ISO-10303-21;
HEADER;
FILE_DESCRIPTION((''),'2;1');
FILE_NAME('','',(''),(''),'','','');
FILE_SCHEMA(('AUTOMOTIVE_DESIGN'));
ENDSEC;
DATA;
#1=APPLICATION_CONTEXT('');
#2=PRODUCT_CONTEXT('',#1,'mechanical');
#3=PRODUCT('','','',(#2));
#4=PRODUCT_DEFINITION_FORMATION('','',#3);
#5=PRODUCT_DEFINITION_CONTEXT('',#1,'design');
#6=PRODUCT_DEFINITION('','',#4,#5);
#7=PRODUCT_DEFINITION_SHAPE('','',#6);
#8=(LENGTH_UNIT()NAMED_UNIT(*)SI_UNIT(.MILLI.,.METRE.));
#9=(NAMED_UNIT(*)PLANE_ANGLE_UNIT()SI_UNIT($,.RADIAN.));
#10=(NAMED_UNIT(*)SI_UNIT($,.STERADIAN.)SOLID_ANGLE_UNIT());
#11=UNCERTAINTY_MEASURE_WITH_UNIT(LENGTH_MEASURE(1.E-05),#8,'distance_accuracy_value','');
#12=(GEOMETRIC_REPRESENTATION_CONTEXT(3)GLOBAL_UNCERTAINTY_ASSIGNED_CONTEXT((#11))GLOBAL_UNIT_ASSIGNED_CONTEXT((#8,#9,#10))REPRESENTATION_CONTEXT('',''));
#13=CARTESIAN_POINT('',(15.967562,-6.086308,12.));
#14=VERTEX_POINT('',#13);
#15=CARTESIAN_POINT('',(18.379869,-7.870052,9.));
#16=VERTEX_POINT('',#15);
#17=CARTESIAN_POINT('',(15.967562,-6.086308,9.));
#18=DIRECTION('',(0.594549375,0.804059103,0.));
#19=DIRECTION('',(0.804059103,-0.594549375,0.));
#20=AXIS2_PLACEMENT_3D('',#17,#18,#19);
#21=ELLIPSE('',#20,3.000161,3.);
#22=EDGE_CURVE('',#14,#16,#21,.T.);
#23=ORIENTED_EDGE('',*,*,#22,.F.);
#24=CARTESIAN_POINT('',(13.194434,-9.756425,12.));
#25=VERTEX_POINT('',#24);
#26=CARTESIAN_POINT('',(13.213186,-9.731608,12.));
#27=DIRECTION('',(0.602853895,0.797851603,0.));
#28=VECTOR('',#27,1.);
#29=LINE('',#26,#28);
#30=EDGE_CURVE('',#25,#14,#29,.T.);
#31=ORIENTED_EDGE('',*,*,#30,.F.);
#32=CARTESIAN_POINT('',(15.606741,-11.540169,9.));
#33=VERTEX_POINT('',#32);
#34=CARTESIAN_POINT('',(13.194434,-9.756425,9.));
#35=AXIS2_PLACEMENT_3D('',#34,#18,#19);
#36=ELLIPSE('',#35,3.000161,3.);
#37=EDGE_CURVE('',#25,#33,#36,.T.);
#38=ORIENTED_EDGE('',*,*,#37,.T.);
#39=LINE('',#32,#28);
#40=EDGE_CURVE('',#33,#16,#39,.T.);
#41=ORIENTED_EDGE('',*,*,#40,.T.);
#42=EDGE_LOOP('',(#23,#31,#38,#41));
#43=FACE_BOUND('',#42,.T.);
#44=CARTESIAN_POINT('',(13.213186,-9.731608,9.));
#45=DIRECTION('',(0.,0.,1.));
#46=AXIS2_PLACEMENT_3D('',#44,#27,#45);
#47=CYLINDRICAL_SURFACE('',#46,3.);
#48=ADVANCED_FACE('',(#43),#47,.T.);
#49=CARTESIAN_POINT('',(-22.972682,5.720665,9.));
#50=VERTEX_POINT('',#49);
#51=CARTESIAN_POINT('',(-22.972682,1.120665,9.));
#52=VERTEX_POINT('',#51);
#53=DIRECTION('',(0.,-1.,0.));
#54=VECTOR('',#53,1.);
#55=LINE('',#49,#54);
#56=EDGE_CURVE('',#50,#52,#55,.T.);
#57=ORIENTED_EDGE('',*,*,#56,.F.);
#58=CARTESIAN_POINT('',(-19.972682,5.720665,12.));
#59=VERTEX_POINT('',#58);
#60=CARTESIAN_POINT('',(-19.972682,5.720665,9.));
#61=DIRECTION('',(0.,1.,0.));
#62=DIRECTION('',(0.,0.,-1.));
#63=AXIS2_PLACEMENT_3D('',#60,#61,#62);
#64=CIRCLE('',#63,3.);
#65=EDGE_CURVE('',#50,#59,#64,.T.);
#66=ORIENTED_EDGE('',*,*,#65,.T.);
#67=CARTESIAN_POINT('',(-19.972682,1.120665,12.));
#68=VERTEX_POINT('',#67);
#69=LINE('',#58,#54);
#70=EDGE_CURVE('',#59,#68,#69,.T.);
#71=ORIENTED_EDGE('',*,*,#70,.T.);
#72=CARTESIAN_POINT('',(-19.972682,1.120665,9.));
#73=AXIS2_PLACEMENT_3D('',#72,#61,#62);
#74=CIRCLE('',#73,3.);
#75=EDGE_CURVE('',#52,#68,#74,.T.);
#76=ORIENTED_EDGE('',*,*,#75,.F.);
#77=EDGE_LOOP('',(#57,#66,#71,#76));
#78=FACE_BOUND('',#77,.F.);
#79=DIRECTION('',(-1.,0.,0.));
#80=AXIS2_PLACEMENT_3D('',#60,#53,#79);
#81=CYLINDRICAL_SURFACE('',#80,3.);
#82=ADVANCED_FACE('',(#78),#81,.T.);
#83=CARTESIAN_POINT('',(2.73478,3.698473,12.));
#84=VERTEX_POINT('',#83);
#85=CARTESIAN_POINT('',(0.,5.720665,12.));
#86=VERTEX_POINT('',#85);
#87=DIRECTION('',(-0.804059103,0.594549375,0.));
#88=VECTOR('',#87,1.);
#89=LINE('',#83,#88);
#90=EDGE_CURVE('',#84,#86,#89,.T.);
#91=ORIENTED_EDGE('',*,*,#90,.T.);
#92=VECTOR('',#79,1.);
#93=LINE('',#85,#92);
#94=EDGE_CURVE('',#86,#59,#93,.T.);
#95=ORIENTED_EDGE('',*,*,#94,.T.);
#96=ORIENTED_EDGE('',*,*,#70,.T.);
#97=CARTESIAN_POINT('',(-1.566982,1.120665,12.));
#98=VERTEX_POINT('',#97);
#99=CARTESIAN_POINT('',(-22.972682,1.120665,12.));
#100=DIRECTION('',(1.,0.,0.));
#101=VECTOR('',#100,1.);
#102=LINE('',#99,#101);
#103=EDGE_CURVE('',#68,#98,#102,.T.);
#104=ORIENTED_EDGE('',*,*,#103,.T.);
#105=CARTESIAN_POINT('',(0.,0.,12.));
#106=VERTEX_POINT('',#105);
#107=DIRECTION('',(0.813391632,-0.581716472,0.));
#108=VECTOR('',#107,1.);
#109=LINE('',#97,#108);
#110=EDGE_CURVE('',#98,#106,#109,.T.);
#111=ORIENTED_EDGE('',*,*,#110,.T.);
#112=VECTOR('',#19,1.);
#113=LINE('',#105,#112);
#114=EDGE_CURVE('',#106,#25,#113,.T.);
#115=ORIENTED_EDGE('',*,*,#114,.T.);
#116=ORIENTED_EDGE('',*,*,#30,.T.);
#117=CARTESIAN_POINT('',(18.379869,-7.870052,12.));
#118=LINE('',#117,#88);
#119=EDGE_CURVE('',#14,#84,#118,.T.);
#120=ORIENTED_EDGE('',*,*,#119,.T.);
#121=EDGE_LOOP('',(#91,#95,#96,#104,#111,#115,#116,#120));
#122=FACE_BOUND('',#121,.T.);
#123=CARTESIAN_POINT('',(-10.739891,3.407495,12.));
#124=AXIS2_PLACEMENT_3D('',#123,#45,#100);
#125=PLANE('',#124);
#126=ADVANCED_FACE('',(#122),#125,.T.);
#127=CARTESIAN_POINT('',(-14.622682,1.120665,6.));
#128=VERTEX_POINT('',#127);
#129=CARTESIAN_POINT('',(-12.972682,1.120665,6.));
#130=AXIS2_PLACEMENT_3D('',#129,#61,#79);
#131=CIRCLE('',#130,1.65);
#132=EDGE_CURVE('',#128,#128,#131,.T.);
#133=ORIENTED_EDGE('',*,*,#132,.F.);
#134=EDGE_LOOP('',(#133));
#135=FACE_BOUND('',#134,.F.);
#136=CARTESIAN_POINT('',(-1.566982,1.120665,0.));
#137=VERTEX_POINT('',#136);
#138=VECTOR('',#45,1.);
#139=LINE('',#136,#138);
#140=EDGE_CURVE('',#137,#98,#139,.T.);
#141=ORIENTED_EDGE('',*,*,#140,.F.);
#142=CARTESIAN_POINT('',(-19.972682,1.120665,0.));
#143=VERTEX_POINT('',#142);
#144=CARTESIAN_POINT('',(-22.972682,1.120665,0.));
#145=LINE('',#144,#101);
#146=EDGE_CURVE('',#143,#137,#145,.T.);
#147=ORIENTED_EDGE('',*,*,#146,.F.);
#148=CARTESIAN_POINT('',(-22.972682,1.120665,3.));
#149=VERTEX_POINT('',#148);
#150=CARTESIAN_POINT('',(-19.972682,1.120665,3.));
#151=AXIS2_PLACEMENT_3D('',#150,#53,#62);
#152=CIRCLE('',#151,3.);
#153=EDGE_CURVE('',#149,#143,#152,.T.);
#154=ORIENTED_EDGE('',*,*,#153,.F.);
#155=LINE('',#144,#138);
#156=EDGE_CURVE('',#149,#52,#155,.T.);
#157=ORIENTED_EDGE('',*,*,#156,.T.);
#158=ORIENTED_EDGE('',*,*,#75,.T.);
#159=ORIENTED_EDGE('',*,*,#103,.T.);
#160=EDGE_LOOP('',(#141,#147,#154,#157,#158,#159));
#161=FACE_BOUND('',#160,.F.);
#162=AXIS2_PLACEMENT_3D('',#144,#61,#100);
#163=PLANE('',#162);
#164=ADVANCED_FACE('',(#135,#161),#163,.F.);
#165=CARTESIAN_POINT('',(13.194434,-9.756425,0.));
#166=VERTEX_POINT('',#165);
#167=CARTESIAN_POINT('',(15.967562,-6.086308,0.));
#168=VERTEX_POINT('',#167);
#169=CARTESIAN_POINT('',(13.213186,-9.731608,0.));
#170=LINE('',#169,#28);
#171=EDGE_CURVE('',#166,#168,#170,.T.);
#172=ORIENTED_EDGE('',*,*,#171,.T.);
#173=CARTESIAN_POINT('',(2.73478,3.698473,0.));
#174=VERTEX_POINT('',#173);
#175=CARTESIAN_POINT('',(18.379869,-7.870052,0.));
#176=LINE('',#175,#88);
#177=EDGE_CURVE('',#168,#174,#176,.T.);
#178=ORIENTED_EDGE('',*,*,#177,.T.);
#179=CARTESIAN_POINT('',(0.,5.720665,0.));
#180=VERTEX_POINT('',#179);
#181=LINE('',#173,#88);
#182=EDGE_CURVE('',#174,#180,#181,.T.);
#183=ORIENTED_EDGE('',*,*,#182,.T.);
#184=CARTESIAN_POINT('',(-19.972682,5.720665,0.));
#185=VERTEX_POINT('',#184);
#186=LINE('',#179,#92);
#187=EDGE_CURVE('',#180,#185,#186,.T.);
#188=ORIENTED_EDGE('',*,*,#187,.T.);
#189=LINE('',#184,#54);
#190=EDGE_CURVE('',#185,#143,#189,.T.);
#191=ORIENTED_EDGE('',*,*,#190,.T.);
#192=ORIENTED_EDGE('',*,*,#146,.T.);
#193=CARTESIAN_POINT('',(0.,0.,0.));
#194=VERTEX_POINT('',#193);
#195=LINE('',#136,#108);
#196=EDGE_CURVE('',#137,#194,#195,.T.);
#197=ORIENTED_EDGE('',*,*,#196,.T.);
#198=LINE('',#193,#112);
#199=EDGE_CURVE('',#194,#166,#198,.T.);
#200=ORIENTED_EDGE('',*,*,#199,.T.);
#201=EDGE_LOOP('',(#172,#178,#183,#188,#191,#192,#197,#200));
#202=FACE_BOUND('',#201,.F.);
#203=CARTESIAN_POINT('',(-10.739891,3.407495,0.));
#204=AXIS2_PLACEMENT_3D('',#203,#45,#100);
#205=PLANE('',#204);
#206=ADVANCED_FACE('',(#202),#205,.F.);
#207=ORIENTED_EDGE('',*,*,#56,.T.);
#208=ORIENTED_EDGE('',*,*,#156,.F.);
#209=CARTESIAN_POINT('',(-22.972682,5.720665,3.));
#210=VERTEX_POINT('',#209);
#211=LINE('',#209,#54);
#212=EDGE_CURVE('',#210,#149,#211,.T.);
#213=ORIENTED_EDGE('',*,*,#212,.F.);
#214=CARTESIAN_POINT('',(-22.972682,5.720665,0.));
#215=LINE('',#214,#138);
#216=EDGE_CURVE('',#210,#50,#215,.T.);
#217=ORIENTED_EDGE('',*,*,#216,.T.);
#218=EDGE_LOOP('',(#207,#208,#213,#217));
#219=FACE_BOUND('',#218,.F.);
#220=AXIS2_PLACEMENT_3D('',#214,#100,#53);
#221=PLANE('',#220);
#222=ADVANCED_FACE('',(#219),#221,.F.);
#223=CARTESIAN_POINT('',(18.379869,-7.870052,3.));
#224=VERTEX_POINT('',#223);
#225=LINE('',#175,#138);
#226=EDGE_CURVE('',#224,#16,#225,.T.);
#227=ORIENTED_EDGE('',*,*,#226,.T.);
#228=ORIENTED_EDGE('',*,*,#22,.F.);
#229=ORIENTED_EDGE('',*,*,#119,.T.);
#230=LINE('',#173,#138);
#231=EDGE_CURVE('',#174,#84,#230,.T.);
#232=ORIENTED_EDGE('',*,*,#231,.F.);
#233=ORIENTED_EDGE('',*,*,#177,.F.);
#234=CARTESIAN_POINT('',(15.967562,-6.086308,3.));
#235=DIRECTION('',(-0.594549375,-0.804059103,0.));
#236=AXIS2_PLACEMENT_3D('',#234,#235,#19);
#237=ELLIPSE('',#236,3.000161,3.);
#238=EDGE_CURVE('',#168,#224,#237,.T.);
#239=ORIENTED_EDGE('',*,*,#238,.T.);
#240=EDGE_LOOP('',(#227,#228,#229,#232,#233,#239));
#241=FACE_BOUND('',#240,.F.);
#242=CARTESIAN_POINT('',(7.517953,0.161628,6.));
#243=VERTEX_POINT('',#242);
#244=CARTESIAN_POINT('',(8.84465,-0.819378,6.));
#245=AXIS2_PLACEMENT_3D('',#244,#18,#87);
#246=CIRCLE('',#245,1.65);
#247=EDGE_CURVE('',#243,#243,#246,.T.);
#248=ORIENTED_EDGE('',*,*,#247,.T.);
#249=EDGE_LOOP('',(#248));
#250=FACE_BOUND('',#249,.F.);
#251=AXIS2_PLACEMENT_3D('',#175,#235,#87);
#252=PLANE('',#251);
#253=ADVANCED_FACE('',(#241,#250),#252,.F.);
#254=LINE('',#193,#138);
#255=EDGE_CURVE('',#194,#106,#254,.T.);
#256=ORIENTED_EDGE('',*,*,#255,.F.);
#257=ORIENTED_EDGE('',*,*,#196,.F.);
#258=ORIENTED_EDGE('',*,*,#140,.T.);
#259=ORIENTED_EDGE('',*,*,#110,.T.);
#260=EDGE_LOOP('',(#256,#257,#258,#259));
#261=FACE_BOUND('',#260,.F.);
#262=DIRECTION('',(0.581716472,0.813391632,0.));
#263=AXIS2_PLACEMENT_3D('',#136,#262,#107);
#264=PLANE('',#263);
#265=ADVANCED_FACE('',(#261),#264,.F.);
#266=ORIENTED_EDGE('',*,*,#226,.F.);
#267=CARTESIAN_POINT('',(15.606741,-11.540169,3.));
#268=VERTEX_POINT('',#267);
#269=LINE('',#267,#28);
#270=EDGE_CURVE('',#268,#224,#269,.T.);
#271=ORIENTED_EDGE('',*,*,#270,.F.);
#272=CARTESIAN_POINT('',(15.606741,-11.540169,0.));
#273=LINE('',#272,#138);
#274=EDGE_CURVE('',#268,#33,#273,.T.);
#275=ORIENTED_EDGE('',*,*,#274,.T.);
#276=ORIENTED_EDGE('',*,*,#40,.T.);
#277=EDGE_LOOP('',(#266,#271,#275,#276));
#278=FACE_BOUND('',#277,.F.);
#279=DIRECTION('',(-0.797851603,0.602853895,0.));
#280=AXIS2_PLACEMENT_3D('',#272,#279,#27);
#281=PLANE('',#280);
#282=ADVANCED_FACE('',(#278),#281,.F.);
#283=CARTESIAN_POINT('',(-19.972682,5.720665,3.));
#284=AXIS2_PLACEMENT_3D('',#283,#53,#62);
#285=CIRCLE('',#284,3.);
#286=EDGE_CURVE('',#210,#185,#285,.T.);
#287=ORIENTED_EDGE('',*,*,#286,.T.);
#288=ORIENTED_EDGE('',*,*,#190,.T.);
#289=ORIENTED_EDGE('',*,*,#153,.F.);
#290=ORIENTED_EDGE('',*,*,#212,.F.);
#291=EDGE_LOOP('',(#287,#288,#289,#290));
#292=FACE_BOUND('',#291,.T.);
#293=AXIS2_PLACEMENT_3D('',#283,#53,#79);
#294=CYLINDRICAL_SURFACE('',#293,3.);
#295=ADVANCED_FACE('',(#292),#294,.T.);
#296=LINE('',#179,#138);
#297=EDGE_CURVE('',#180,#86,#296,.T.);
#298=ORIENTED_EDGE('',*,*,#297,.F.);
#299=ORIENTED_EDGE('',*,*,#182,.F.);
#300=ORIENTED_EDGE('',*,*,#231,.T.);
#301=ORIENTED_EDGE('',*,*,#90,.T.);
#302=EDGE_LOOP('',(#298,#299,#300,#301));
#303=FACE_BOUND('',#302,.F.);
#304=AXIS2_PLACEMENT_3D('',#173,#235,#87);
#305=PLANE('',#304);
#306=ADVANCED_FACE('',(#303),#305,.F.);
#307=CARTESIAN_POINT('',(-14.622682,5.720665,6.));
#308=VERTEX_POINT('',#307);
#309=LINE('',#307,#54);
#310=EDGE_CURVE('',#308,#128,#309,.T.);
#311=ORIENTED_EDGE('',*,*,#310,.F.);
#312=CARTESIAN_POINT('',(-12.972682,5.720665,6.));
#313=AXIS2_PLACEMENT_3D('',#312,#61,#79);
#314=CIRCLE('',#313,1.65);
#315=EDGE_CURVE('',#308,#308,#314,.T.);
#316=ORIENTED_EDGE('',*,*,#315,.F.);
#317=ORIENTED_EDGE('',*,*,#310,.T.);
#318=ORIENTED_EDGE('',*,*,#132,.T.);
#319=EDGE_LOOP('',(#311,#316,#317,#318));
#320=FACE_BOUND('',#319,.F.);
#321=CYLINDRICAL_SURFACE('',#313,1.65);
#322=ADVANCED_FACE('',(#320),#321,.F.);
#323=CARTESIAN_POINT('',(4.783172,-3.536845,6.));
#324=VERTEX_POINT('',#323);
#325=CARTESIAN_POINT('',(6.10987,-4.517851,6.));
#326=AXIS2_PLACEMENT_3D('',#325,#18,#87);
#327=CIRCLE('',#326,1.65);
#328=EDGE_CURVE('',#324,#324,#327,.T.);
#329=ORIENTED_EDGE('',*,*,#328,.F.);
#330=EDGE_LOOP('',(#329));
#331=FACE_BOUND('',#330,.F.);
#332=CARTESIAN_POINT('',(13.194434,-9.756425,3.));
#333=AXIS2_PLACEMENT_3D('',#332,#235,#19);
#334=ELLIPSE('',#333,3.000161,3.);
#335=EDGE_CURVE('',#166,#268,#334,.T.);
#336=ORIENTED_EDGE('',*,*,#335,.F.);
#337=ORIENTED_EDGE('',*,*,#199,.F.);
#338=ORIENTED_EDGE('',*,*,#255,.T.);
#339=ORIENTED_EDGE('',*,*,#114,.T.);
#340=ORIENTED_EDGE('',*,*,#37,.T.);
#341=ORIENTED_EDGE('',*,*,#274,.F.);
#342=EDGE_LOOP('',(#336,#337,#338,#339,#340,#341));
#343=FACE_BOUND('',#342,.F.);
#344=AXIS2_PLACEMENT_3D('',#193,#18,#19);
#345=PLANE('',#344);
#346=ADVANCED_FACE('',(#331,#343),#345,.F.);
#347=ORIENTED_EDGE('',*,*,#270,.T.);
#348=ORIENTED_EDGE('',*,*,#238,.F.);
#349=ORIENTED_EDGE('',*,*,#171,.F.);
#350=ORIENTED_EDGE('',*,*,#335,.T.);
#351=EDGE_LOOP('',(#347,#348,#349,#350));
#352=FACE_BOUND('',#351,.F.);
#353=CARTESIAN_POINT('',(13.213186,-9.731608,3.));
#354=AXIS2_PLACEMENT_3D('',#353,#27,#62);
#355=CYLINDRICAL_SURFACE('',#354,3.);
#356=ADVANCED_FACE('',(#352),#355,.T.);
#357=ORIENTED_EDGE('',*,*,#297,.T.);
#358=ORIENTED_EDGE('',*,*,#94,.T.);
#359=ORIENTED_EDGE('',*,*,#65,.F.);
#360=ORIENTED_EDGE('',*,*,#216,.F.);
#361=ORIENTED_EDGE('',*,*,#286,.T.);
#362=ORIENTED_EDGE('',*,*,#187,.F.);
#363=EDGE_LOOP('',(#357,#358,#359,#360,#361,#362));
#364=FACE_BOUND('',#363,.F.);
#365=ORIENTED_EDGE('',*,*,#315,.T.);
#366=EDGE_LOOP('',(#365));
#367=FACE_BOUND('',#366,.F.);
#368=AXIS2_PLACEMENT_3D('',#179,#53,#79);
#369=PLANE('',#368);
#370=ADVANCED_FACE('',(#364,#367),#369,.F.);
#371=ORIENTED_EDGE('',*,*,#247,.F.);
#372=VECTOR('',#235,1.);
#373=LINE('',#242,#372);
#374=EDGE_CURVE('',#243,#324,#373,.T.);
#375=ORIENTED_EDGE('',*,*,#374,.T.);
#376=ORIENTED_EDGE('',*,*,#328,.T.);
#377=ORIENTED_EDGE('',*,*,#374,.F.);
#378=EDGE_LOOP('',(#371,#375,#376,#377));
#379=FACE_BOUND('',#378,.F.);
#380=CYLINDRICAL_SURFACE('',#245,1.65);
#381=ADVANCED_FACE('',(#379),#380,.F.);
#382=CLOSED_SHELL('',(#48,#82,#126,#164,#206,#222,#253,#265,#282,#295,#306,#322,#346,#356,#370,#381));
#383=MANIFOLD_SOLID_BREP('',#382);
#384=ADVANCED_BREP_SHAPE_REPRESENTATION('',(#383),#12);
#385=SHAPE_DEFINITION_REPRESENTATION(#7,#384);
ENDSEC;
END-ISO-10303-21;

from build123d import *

# Parameters (mm, degrees)
F1_DEPTH = 12
F2_R     = 1.65
F3_DEPTH = 27.5381246112
F4_R     = 1.65
F5_DEPTH = 17.26183437
F6_R     = 3


# Not quite as in the source:
# - a feature names something its author has since deleted; it is built from what else it names


with BuildPart() as f1:
    # F0 (on Top) → F1 (new body)
    with BuildSketch(Plane.XY):
        Polygon((-22.9726818199, 5.7206649829), (-22.9726818199, 1.1206649829), (-1.5669824788, 1.1206649829), (0.8286588168, 1.1206649829), (2.734780124, 3.6984730734), (0, 5.7206649829), align=None)
        Polygon((2.734780124, 3.6984730734), (0.8286588168, 1.1206649829), (0, 0), (15.6067412389, -11.5401693871), (18.3798691562, -7.870052011), align=None)
        Polygon((0.8286588168, 1.1206649829), (-1.5669824788, 1.1206649829), (0, 0), align=None)
    extrude(amount=F1_DEPTH)

    # F2 (on face) → F3 (cut, through all)
    with BuildSketch(Plane(origin=(2.734780124, 3.6984730734, 0), x_dir=(-0.8040591029, 0.5945493747, 0), z_dir=(0.5945493747, 0.8040591029, 0))):
        with Locations((-7.5987822114, 6)):
            Circle(F2_R)
    extrude(amount=-F3_DEPTH, mode=Mode.SUBTRACT)

    # F4 (on face) → F5 (cut, through all)
    with BuildSketch(Plane(origin=(0, 5.7206649829, 0), x_dir=(-1, 0, 0), z_dir=(0, 1, 0))):
        with Locations((12.9726818199, 6)):
            Circle(F4_R)
    extrude(amount=-F5_DEPTH, mode=Mode.SUBTRACT)

    # F6
    f6_edges = [f1.edges().sort_by_distance(p)[0] for p in [
        (-22.972682, 3.420665, 12),
        (-22.972682, 3.420665, 0),
        (16.993305, -9.705111, 0),
        (16.993305, -9.705111, 12),
    ]]
    fillet(f6_edges, radius=F6_R)


solid = f1.part
